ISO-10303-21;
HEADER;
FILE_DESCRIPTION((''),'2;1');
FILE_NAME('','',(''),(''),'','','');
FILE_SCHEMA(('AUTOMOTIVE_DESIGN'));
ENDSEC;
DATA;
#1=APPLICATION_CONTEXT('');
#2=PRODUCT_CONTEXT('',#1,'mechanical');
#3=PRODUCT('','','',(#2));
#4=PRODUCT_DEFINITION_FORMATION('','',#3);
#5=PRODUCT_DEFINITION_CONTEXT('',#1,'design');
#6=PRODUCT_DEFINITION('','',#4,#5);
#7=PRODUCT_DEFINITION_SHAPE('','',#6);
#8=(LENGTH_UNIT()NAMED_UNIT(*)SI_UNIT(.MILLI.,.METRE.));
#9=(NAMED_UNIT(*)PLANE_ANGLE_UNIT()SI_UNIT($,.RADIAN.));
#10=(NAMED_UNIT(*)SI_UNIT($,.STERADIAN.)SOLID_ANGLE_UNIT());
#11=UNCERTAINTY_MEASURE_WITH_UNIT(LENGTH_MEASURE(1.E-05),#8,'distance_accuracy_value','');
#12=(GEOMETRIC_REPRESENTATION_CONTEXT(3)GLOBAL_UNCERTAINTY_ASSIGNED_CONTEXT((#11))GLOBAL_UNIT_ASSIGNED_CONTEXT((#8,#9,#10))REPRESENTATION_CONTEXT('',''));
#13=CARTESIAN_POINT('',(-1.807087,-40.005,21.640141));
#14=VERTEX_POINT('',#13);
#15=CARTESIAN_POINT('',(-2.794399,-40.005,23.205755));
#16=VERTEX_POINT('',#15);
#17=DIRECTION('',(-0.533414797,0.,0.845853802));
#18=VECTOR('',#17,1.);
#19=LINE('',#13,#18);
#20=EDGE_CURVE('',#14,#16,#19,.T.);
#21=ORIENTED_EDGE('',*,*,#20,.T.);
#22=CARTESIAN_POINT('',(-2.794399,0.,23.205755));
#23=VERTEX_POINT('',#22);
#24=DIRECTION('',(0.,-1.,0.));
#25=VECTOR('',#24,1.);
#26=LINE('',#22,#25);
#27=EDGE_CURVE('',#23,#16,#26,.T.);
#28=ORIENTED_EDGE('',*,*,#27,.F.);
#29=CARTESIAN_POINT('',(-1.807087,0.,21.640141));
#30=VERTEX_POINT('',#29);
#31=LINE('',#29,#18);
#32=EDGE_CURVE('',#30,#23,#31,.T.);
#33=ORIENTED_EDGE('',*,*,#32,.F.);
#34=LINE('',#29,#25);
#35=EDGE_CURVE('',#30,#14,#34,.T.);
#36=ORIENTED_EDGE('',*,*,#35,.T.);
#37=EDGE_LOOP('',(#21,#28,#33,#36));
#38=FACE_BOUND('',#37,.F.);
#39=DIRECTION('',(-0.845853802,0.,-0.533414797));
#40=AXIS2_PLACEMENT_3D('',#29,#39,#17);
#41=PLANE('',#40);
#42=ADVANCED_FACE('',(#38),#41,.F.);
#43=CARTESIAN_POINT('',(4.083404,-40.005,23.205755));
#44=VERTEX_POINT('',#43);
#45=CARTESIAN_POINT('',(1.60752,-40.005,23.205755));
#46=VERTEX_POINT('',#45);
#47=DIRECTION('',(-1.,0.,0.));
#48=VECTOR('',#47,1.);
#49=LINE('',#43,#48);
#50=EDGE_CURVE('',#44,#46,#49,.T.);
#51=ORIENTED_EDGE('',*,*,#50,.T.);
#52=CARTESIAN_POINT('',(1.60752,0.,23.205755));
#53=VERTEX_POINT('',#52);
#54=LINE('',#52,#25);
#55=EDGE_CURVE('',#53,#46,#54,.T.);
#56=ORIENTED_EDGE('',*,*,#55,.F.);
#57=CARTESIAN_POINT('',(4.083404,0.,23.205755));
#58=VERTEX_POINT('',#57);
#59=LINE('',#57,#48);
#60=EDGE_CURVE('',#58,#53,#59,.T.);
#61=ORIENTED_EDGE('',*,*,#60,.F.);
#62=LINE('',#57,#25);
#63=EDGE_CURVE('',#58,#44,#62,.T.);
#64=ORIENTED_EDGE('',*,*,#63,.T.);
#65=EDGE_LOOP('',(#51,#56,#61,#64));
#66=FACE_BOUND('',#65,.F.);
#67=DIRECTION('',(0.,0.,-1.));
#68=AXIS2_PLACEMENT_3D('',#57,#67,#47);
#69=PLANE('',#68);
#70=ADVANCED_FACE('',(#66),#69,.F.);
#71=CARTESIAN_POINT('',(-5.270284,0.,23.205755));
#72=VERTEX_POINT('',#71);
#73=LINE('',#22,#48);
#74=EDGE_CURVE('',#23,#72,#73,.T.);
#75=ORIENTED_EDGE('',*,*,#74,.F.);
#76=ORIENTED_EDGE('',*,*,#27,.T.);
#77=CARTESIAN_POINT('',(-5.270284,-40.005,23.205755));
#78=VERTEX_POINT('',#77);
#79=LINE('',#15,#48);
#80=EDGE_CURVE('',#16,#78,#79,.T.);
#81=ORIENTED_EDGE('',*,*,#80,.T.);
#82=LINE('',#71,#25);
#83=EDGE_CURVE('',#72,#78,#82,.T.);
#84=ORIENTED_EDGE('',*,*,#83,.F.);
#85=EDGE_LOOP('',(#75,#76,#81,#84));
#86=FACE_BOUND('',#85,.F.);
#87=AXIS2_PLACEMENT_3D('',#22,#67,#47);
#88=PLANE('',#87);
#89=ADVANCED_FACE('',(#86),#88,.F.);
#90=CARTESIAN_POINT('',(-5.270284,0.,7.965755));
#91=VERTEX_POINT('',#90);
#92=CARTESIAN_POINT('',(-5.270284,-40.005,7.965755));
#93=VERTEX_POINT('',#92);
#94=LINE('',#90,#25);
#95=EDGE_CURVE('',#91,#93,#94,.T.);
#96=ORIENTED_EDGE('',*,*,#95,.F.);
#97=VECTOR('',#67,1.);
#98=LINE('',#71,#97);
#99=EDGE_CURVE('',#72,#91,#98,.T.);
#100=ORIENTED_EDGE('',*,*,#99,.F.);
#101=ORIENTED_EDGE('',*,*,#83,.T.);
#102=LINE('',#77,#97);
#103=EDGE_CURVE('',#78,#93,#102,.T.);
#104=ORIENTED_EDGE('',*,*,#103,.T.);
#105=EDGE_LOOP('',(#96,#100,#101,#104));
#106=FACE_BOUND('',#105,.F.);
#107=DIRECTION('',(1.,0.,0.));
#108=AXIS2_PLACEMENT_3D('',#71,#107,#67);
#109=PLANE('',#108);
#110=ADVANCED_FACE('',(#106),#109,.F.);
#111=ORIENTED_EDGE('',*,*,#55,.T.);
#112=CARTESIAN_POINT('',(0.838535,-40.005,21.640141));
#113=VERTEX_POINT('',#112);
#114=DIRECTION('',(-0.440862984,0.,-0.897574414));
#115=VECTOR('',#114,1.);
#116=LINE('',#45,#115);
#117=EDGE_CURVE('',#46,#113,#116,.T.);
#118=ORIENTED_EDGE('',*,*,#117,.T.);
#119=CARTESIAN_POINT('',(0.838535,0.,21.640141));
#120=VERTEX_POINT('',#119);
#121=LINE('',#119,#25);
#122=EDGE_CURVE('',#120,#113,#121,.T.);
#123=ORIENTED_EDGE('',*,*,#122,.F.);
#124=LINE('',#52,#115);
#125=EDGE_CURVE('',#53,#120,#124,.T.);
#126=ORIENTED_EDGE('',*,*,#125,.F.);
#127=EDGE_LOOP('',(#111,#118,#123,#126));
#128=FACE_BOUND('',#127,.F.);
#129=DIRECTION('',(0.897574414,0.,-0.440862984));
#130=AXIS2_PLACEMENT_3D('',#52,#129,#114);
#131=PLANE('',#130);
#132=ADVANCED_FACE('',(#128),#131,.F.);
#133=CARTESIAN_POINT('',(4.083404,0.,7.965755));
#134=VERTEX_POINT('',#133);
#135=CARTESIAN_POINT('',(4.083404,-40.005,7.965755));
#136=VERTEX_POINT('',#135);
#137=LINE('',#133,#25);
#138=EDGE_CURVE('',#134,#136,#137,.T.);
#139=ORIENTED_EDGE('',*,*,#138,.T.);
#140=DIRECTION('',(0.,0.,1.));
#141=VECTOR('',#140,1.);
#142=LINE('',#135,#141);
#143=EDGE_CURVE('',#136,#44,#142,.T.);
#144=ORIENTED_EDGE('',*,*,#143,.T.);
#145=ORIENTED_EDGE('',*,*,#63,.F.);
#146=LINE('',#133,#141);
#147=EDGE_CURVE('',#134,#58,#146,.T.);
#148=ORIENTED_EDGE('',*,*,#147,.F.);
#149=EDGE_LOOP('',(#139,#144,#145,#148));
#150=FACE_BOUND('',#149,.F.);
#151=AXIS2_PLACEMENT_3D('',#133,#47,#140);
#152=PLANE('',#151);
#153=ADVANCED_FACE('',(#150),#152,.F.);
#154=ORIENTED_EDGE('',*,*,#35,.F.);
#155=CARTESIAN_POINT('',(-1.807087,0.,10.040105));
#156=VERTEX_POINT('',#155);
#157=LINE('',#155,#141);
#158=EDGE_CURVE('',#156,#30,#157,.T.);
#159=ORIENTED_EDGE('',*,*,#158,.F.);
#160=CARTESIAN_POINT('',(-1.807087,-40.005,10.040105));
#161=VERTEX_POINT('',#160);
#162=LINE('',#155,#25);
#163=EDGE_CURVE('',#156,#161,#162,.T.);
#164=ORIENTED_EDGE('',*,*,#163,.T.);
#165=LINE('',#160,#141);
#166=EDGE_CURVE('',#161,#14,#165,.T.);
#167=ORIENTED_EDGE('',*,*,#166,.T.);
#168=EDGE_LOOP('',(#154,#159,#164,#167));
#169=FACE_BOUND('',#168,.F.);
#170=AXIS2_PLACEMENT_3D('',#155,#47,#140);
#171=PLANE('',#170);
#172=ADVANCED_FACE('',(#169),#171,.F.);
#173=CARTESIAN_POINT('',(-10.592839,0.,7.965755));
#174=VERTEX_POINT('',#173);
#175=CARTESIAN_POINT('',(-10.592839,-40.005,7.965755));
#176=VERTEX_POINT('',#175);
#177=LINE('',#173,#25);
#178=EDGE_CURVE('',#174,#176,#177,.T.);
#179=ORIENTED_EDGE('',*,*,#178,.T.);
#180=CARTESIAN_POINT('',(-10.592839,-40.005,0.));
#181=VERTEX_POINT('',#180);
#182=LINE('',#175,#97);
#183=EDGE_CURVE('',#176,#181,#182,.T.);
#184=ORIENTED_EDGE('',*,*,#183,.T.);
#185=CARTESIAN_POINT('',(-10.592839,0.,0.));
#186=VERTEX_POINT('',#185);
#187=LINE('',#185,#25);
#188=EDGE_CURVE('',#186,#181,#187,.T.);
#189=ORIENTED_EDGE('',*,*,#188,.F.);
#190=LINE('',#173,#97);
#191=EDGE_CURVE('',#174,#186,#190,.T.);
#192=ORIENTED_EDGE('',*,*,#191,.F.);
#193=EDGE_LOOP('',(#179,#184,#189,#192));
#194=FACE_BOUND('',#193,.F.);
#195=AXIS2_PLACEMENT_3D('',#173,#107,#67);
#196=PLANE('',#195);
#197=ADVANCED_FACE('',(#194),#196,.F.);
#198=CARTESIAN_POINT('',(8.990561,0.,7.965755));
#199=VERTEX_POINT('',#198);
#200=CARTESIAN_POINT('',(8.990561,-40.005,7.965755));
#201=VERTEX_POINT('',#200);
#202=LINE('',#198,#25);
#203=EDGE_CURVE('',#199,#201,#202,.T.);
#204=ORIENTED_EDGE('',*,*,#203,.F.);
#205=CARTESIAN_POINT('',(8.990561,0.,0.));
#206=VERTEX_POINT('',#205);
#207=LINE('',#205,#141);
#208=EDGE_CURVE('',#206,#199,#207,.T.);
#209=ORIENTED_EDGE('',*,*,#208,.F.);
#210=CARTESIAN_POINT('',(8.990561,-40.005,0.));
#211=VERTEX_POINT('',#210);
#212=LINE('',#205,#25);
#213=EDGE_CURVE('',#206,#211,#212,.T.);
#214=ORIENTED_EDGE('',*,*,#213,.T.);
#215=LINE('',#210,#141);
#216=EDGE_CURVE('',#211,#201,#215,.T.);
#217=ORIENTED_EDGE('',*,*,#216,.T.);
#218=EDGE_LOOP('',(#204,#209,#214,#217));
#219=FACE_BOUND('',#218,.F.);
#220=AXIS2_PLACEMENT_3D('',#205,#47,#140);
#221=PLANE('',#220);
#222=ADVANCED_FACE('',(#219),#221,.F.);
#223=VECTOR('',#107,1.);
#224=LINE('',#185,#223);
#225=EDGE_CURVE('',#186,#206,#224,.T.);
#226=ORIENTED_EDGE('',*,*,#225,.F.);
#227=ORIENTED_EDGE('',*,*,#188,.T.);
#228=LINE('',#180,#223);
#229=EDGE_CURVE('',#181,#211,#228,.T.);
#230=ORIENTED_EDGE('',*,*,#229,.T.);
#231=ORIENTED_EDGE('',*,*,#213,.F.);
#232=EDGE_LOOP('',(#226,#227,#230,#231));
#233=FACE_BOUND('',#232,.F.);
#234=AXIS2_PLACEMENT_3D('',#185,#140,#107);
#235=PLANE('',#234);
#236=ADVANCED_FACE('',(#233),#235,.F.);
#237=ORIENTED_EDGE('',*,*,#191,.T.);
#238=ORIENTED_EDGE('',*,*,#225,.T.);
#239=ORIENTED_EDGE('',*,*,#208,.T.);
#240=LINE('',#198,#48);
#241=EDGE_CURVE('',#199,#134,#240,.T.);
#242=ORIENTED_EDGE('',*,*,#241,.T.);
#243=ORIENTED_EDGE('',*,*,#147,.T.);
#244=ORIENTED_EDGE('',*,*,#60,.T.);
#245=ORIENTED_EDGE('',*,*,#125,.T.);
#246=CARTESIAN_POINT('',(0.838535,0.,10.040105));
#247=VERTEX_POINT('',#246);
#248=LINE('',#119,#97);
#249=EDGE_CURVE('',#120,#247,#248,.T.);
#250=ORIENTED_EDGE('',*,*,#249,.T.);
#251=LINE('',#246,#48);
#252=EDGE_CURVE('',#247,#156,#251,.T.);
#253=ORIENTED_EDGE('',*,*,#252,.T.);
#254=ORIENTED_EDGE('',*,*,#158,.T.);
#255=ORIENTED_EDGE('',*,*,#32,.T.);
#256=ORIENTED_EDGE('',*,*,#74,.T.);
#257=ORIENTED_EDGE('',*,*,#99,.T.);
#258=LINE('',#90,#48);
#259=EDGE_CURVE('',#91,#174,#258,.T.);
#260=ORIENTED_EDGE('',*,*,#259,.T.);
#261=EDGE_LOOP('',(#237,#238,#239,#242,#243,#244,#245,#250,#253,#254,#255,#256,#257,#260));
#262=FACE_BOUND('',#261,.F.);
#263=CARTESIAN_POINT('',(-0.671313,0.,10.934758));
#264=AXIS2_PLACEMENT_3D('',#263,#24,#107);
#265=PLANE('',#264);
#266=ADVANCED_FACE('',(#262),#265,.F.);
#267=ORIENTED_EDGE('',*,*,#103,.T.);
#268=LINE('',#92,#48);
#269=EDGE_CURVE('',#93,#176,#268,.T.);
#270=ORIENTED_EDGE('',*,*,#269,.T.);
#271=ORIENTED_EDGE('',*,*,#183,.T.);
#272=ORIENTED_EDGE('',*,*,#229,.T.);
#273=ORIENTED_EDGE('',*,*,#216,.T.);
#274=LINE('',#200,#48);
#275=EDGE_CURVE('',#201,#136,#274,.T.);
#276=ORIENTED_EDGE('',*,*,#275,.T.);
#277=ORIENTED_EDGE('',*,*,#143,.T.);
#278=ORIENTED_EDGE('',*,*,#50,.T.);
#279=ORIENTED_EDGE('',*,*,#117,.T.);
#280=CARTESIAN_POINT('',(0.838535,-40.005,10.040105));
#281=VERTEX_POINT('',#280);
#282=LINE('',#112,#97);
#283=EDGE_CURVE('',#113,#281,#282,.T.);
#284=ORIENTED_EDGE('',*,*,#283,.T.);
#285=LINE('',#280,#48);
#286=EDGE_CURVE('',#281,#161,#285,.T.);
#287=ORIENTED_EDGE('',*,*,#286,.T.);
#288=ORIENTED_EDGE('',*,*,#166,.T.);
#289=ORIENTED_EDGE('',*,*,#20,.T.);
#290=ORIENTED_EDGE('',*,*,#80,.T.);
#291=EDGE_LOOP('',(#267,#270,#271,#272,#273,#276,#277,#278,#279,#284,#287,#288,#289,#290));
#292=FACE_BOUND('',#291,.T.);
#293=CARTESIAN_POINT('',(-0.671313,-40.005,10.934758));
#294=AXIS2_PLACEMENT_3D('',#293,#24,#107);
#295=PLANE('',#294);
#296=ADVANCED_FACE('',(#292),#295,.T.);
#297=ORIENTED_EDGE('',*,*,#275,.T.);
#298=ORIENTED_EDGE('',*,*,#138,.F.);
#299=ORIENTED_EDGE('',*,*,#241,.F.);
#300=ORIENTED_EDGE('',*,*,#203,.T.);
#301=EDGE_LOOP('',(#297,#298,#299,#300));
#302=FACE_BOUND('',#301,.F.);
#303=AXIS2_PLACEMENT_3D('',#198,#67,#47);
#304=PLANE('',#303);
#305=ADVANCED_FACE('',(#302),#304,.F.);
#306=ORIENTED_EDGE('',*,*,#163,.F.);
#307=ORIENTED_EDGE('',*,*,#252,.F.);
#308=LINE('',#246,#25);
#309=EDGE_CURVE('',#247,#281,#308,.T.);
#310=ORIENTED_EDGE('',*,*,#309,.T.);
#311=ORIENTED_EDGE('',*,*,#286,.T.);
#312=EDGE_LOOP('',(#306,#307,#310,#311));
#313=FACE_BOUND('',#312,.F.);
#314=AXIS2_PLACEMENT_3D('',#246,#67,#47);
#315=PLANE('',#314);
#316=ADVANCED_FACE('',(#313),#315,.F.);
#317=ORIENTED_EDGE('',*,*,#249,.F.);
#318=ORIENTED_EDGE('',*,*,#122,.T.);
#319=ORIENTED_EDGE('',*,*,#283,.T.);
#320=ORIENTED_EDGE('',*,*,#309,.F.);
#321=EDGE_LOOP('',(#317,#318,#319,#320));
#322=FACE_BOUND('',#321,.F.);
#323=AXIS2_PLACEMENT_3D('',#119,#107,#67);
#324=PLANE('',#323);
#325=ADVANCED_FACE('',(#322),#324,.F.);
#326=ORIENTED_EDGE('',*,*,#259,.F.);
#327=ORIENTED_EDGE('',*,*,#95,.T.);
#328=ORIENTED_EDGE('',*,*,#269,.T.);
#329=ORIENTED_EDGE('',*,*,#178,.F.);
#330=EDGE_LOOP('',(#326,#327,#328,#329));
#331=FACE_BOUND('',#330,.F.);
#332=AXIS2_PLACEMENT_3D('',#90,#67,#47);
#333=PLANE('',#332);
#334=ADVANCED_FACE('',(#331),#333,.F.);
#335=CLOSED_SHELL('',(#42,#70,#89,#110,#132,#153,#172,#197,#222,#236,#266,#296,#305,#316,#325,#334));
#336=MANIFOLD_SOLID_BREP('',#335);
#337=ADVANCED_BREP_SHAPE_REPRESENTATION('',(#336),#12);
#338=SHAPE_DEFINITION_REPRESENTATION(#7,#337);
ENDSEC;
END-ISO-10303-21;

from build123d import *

# Parameters (mm, degrees)
F1_DEPTH = 40.005


# Not quite as in the source:
# - the program builds the solid bodies; features that only make, move or delete a surface that nothing else refers to are left out


with BuildPart() as f1:
    # F0 (on Front) → F1 (new body)
    with BuildSketch(Plane.XZ):
        Polygon((-10.5928385672, 7.9657547176), (-10.5928385672, 0), (8.9905614328, 0), (8.9905614328, 7.9657547176), (4.0834043175, 7.9657547176), (4.0834043175, 23.2057547176), (1.6075200401, 23.2057547176), (0.8385349647, 21.6401405632), (0.8385349647, 10.0401053205), (-1.8070872175, 10.0401053205), (-1.8070872175, 21.6401405632), (-2.7943993919, 23.2057547176), (-5.2702836692, 23.2057547176), (-5.2702836692, 7.9657547176), align=None)
    extrude(amount=F1_DEPTH)


solid = f1.part
